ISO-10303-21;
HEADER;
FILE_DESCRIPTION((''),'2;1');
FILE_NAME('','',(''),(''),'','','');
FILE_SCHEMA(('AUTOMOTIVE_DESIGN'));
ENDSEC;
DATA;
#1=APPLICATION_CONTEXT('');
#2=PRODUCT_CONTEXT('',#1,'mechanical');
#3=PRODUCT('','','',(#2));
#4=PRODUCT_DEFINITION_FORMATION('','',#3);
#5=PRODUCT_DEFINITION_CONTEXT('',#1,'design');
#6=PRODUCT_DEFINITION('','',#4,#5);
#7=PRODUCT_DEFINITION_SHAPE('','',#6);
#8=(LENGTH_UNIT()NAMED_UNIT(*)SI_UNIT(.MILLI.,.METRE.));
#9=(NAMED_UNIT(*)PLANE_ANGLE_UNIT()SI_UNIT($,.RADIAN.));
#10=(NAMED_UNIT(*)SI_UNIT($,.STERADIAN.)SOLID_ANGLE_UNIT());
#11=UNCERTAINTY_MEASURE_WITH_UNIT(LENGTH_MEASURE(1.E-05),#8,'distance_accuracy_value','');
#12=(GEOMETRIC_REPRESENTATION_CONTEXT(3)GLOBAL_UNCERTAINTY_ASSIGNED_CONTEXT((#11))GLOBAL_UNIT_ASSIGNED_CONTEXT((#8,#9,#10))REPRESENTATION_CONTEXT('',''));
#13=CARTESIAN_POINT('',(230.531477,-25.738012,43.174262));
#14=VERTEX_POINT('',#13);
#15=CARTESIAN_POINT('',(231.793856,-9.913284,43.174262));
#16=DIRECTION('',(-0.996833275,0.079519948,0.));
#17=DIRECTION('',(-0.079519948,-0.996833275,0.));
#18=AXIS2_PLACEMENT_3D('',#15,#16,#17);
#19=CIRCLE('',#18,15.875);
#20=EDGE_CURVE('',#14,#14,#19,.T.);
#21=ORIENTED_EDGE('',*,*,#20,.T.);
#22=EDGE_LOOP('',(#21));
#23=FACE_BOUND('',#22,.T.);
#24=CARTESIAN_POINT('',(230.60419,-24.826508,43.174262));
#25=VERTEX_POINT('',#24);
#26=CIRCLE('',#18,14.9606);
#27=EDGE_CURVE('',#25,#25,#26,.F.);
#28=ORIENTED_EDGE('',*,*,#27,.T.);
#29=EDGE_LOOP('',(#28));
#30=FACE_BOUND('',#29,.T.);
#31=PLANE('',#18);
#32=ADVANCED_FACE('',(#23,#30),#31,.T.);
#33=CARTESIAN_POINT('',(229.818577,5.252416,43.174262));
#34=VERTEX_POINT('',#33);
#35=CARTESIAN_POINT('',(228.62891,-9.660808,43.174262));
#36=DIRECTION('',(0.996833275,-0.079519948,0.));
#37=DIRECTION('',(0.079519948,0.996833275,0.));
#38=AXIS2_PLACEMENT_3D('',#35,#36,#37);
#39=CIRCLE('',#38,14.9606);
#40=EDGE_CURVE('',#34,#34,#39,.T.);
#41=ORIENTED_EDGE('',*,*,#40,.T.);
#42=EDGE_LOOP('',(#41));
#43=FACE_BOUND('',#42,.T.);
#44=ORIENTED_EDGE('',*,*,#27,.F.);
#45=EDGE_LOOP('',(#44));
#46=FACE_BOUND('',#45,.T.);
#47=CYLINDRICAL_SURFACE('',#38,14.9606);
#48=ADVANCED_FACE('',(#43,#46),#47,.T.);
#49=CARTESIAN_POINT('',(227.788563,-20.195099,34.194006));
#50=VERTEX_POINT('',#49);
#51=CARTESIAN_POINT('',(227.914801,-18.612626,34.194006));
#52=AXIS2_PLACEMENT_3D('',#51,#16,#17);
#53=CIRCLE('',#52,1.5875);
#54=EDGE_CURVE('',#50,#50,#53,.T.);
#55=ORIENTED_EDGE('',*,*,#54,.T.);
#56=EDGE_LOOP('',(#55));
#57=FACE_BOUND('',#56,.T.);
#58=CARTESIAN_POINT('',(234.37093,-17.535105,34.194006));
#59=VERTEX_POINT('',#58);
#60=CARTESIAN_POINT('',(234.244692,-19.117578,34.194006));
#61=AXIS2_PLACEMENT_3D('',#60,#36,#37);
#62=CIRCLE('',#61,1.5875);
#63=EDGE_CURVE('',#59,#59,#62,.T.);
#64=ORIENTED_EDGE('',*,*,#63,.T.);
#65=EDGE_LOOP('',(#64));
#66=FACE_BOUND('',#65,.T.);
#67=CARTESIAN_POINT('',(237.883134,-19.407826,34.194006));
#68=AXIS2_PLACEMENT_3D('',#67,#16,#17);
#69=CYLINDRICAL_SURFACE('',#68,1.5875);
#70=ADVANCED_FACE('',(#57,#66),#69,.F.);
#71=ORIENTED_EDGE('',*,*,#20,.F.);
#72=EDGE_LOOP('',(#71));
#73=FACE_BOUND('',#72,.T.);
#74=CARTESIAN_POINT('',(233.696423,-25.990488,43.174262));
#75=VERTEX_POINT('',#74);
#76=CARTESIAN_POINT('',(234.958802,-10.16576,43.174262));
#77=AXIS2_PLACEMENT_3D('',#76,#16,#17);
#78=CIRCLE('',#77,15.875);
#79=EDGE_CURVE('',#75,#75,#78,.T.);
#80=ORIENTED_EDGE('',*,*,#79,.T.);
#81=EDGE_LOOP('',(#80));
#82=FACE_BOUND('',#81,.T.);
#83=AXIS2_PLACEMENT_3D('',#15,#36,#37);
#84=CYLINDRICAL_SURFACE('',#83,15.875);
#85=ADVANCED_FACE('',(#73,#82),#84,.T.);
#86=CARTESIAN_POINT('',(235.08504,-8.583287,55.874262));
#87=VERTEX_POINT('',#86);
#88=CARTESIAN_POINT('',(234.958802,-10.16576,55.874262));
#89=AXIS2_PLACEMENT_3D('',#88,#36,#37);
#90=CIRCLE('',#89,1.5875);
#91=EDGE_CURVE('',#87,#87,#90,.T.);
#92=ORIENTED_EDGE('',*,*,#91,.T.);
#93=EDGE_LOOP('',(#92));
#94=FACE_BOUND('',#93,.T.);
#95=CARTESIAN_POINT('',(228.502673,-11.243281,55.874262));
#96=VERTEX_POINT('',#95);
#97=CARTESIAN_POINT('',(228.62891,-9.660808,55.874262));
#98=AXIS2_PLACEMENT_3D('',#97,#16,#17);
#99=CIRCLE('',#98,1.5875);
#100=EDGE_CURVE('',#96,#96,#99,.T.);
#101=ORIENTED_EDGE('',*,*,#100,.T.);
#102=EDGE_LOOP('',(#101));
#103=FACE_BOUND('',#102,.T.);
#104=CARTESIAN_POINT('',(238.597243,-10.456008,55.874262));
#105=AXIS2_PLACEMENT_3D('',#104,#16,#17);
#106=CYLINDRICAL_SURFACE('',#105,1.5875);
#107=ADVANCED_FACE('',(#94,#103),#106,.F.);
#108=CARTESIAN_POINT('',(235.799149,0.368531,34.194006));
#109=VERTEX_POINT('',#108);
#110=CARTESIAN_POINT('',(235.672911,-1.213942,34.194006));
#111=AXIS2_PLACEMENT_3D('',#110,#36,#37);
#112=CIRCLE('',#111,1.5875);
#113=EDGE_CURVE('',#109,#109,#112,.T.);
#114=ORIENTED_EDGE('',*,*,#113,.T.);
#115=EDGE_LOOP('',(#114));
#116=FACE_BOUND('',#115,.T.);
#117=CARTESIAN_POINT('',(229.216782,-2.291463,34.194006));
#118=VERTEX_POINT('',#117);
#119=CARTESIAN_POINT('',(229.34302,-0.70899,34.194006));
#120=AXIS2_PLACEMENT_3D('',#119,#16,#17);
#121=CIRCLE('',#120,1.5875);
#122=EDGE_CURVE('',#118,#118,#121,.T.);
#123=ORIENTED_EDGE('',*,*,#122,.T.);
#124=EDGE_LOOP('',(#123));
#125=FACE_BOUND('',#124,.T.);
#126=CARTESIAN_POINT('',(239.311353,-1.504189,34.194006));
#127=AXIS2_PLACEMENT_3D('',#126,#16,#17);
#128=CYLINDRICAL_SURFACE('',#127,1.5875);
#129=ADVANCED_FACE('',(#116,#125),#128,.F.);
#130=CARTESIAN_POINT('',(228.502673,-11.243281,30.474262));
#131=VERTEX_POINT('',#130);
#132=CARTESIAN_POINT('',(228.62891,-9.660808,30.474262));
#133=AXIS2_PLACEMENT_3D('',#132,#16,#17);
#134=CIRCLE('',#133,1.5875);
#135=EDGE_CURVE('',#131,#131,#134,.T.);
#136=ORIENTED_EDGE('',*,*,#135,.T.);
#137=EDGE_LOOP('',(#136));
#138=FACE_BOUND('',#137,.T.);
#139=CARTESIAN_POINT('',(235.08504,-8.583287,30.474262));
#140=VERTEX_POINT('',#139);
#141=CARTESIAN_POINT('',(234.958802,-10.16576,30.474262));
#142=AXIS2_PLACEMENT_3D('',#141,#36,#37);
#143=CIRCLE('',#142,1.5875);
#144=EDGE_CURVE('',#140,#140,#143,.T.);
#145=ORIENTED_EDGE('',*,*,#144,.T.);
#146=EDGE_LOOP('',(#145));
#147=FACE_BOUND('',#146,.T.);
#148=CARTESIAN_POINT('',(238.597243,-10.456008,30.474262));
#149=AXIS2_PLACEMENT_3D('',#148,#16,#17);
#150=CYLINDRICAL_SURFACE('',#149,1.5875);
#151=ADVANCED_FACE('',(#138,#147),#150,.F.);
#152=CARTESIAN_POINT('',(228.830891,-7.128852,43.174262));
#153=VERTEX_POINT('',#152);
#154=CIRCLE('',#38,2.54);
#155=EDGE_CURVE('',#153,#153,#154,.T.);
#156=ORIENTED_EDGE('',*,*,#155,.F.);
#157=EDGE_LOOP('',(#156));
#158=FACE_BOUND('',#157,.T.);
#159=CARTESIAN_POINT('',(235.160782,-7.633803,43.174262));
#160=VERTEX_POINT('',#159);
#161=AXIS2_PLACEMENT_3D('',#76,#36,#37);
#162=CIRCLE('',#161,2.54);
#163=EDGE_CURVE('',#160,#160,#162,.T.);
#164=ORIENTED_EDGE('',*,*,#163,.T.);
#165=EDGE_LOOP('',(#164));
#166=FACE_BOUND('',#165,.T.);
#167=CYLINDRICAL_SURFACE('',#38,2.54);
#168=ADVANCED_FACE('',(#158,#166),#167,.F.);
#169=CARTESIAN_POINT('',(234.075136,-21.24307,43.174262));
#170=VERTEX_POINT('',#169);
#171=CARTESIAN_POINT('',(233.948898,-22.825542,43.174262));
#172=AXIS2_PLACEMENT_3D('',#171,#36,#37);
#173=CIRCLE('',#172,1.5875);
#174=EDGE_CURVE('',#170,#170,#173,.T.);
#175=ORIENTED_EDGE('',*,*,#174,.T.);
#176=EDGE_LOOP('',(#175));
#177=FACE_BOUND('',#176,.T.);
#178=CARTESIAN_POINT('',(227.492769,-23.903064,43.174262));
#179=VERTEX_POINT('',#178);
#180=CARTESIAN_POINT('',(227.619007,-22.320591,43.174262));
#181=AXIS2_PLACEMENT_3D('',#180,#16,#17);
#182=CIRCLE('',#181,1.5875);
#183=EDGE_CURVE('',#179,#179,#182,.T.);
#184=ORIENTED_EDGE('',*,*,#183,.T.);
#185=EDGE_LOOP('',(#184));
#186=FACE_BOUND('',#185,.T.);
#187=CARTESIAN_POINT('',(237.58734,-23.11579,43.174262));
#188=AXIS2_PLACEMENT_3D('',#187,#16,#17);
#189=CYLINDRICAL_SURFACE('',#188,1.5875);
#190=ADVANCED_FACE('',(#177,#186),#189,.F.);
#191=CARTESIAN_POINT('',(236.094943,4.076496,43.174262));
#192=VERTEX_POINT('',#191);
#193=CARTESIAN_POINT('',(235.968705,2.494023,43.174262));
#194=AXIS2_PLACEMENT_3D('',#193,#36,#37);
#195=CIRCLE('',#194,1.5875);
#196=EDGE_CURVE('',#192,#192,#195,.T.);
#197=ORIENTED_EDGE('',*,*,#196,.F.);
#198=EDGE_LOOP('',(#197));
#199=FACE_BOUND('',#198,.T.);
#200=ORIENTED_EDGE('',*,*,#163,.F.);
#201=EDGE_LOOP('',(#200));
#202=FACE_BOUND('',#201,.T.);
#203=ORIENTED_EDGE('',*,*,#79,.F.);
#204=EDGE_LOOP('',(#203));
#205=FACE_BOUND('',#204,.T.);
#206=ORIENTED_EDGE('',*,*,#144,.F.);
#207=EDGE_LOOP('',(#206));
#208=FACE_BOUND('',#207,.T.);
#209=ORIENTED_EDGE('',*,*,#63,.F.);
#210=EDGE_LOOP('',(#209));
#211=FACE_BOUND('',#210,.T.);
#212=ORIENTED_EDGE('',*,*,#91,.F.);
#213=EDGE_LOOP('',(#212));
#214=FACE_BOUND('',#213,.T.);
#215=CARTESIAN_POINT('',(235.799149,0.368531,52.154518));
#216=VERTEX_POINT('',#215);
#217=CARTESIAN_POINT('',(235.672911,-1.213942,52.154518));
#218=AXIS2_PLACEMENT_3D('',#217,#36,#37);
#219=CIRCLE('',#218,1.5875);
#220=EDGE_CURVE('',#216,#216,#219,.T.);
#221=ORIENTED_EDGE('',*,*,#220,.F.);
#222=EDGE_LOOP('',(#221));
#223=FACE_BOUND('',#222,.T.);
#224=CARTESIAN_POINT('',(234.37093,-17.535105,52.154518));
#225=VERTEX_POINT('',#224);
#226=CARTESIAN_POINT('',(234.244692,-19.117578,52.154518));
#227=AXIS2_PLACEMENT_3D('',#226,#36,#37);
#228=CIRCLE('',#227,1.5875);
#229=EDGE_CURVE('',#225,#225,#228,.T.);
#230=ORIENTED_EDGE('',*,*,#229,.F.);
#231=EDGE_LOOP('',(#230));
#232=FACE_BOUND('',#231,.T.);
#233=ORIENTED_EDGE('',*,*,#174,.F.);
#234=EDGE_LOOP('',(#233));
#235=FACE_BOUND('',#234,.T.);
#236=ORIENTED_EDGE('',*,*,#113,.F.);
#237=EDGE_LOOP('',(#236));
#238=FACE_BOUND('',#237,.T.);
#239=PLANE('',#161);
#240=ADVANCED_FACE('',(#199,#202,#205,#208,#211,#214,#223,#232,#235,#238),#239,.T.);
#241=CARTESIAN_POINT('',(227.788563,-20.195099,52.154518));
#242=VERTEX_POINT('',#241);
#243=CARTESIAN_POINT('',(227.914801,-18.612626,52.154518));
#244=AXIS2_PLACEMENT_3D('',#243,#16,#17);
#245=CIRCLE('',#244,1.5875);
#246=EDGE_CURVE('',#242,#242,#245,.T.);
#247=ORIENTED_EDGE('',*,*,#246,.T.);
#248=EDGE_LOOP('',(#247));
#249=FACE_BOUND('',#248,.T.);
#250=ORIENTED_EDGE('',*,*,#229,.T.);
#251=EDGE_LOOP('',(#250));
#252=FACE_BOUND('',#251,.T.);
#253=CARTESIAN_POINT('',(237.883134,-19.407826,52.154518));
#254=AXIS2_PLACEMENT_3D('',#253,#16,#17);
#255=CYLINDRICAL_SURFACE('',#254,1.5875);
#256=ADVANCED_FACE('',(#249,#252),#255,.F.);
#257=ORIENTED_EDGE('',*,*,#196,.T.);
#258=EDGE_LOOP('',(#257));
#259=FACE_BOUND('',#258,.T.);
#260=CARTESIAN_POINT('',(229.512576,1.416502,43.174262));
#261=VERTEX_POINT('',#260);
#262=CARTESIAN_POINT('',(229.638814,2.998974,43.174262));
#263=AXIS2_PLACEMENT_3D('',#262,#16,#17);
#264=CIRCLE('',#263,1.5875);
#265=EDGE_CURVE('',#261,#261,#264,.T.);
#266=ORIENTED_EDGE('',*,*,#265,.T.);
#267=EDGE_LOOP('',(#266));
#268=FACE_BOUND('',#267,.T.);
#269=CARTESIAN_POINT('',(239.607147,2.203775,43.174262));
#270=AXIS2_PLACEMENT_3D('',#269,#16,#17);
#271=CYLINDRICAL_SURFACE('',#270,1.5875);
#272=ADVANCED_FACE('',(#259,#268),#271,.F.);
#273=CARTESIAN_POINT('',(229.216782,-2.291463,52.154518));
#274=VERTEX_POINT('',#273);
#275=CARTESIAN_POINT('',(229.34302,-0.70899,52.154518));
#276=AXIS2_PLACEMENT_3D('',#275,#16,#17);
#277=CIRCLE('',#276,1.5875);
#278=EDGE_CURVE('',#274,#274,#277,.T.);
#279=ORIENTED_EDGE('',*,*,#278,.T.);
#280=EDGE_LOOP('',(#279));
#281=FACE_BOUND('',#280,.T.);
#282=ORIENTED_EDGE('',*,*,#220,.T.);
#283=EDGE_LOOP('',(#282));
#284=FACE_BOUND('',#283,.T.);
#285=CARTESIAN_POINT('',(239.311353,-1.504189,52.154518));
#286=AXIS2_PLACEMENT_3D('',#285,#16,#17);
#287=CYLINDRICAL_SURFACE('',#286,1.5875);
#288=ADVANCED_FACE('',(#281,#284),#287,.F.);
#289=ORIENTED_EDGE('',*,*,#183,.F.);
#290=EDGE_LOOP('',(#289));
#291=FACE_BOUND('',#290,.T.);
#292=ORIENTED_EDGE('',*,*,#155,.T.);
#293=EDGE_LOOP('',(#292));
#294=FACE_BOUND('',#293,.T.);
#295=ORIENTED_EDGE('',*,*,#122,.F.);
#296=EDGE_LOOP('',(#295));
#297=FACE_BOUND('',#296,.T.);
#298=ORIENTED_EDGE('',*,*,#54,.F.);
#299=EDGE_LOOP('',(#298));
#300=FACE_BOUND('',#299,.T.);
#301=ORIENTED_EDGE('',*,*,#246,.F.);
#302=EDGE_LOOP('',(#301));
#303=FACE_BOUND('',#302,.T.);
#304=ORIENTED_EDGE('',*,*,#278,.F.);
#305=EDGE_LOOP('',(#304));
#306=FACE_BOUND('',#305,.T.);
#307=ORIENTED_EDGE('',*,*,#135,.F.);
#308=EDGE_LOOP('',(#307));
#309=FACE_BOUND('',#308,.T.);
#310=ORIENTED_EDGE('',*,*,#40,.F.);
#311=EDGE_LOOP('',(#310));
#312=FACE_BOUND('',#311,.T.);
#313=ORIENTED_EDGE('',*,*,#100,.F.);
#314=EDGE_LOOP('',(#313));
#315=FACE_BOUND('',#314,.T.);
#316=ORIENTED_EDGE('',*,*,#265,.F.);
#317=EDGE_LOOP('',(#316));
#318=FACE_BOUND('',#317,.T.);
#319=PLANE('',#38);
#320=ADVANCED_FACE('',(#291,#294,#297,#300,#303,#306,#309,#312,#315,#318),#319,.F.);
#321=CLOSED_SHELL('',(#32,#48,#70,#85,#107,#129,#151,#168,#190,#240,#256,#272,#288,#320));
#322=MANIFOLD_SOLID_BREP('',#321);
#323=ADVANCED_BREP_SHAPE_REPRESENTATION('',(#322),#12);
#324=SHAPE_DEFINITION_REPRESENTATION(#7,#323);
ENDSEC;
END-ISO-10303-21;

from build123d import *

# Parameters (mm, degrees)
SKETCH1_R           = 14.9606
BOSS_EXTRUDE1_DEPTH = 6.35
SKETCH2_R           = 2.54
CUT_EXTRUDE1_DEPTH  = 6.35
SKETCH3_R           = 1.5875
CUT_EXTRUDE2_DEPTH  = 10
SKETCH5_R           = 15.875
SKETCH5_R_2         = 14.9606
BOSS_EXTRUDE2_DEPTH = 3.175


with BuildPart() as part:
    # Sketch1 → Boss-Extrude1 (new body)
    with BuildSketch(Plane(origin=(234.278878836, -18.689027227, 0), x_dir=(0, 0, -1), z_dir=(0.9968332748770866, -0.0795199477981641, 0))):
        with Locations((-43.174261814, 8.550344032)):
            Circle(SKETCH1_R)
    extrude(amount=-BOSS_EXTRUDE1_DEPTH)

    # Sketch2 → Cut-Extrude1 (cut)
    with BuildSketch(Plane(origin=(234.278878836, -18.689027227, 0), x_dir=(0, 0, -1), z_dir=(0.9968332748770866, -0.07951994779816411, 0))):
        with Locations((-43.174261814, 8.550344032)):
            Circle(SKETCH2_R)
    extrude(amount=-CUT_EXTRUDE1_DEPTH, mode=Mode.SUBTRACT)

    # Sketch3 → Cut-Extrude2 (cut)
    with BuildSketch(Plane(origin=(227.94898754, -18.184075559, 0), x_dir=(0, 0, 1), z_dir=(-0.9968332748770866, 0.07951994779816411, 0))):
        with Locations((43.174261814, 21.250344032)):
            Circle(SKETCH3_R)
        with Locations((52.154517935, 17.530600153)):
            Circle(SKETCH3_R)
        with Locations((55.874261814, 8.550344032)):
            Circle(SKETCH3_R)
        with Locations((52.154517935, -0.429912089)):
            Circle(SKETCH3_R)
        with Locations((43.174261814, -4.149655968)):
            Circle(SKETCH3_R)
        with Locations((34.194005693, -0.429912089)):
            Circle(SKETCH3_R)
        with Locations((30.474261814, 8.550344032)):
            Circle(SKETCH3_R)
        with Locations((34.194005693, 17.530600153)):
            Circle(SKETCH3_R)
    extrude(amount=-CUT_EXTRUDE2_DEPTH, mode=Mode.SUBTRACT)

    # Sketch5 → Boss-Extrude2 (add)
    with BuildSketch(Plane(origin=(234.278878836, -18.689027227, 0), x_dir=(0, 0, 1), z_dir=(-0.9968332748770866, 0.07951994779816411, 0))):
        with Locations((43.174261814, 8.550344032)):
            Circle(SKETCH5_R)
        with Locations((43.174261814, 8.550344032)):
            Circle(SKETCH5_R_2, mode=Mode.SUBTRACT)
    extrude(amount=BOSS_EXTRUDE2_DEPTH)


solid = part.part
